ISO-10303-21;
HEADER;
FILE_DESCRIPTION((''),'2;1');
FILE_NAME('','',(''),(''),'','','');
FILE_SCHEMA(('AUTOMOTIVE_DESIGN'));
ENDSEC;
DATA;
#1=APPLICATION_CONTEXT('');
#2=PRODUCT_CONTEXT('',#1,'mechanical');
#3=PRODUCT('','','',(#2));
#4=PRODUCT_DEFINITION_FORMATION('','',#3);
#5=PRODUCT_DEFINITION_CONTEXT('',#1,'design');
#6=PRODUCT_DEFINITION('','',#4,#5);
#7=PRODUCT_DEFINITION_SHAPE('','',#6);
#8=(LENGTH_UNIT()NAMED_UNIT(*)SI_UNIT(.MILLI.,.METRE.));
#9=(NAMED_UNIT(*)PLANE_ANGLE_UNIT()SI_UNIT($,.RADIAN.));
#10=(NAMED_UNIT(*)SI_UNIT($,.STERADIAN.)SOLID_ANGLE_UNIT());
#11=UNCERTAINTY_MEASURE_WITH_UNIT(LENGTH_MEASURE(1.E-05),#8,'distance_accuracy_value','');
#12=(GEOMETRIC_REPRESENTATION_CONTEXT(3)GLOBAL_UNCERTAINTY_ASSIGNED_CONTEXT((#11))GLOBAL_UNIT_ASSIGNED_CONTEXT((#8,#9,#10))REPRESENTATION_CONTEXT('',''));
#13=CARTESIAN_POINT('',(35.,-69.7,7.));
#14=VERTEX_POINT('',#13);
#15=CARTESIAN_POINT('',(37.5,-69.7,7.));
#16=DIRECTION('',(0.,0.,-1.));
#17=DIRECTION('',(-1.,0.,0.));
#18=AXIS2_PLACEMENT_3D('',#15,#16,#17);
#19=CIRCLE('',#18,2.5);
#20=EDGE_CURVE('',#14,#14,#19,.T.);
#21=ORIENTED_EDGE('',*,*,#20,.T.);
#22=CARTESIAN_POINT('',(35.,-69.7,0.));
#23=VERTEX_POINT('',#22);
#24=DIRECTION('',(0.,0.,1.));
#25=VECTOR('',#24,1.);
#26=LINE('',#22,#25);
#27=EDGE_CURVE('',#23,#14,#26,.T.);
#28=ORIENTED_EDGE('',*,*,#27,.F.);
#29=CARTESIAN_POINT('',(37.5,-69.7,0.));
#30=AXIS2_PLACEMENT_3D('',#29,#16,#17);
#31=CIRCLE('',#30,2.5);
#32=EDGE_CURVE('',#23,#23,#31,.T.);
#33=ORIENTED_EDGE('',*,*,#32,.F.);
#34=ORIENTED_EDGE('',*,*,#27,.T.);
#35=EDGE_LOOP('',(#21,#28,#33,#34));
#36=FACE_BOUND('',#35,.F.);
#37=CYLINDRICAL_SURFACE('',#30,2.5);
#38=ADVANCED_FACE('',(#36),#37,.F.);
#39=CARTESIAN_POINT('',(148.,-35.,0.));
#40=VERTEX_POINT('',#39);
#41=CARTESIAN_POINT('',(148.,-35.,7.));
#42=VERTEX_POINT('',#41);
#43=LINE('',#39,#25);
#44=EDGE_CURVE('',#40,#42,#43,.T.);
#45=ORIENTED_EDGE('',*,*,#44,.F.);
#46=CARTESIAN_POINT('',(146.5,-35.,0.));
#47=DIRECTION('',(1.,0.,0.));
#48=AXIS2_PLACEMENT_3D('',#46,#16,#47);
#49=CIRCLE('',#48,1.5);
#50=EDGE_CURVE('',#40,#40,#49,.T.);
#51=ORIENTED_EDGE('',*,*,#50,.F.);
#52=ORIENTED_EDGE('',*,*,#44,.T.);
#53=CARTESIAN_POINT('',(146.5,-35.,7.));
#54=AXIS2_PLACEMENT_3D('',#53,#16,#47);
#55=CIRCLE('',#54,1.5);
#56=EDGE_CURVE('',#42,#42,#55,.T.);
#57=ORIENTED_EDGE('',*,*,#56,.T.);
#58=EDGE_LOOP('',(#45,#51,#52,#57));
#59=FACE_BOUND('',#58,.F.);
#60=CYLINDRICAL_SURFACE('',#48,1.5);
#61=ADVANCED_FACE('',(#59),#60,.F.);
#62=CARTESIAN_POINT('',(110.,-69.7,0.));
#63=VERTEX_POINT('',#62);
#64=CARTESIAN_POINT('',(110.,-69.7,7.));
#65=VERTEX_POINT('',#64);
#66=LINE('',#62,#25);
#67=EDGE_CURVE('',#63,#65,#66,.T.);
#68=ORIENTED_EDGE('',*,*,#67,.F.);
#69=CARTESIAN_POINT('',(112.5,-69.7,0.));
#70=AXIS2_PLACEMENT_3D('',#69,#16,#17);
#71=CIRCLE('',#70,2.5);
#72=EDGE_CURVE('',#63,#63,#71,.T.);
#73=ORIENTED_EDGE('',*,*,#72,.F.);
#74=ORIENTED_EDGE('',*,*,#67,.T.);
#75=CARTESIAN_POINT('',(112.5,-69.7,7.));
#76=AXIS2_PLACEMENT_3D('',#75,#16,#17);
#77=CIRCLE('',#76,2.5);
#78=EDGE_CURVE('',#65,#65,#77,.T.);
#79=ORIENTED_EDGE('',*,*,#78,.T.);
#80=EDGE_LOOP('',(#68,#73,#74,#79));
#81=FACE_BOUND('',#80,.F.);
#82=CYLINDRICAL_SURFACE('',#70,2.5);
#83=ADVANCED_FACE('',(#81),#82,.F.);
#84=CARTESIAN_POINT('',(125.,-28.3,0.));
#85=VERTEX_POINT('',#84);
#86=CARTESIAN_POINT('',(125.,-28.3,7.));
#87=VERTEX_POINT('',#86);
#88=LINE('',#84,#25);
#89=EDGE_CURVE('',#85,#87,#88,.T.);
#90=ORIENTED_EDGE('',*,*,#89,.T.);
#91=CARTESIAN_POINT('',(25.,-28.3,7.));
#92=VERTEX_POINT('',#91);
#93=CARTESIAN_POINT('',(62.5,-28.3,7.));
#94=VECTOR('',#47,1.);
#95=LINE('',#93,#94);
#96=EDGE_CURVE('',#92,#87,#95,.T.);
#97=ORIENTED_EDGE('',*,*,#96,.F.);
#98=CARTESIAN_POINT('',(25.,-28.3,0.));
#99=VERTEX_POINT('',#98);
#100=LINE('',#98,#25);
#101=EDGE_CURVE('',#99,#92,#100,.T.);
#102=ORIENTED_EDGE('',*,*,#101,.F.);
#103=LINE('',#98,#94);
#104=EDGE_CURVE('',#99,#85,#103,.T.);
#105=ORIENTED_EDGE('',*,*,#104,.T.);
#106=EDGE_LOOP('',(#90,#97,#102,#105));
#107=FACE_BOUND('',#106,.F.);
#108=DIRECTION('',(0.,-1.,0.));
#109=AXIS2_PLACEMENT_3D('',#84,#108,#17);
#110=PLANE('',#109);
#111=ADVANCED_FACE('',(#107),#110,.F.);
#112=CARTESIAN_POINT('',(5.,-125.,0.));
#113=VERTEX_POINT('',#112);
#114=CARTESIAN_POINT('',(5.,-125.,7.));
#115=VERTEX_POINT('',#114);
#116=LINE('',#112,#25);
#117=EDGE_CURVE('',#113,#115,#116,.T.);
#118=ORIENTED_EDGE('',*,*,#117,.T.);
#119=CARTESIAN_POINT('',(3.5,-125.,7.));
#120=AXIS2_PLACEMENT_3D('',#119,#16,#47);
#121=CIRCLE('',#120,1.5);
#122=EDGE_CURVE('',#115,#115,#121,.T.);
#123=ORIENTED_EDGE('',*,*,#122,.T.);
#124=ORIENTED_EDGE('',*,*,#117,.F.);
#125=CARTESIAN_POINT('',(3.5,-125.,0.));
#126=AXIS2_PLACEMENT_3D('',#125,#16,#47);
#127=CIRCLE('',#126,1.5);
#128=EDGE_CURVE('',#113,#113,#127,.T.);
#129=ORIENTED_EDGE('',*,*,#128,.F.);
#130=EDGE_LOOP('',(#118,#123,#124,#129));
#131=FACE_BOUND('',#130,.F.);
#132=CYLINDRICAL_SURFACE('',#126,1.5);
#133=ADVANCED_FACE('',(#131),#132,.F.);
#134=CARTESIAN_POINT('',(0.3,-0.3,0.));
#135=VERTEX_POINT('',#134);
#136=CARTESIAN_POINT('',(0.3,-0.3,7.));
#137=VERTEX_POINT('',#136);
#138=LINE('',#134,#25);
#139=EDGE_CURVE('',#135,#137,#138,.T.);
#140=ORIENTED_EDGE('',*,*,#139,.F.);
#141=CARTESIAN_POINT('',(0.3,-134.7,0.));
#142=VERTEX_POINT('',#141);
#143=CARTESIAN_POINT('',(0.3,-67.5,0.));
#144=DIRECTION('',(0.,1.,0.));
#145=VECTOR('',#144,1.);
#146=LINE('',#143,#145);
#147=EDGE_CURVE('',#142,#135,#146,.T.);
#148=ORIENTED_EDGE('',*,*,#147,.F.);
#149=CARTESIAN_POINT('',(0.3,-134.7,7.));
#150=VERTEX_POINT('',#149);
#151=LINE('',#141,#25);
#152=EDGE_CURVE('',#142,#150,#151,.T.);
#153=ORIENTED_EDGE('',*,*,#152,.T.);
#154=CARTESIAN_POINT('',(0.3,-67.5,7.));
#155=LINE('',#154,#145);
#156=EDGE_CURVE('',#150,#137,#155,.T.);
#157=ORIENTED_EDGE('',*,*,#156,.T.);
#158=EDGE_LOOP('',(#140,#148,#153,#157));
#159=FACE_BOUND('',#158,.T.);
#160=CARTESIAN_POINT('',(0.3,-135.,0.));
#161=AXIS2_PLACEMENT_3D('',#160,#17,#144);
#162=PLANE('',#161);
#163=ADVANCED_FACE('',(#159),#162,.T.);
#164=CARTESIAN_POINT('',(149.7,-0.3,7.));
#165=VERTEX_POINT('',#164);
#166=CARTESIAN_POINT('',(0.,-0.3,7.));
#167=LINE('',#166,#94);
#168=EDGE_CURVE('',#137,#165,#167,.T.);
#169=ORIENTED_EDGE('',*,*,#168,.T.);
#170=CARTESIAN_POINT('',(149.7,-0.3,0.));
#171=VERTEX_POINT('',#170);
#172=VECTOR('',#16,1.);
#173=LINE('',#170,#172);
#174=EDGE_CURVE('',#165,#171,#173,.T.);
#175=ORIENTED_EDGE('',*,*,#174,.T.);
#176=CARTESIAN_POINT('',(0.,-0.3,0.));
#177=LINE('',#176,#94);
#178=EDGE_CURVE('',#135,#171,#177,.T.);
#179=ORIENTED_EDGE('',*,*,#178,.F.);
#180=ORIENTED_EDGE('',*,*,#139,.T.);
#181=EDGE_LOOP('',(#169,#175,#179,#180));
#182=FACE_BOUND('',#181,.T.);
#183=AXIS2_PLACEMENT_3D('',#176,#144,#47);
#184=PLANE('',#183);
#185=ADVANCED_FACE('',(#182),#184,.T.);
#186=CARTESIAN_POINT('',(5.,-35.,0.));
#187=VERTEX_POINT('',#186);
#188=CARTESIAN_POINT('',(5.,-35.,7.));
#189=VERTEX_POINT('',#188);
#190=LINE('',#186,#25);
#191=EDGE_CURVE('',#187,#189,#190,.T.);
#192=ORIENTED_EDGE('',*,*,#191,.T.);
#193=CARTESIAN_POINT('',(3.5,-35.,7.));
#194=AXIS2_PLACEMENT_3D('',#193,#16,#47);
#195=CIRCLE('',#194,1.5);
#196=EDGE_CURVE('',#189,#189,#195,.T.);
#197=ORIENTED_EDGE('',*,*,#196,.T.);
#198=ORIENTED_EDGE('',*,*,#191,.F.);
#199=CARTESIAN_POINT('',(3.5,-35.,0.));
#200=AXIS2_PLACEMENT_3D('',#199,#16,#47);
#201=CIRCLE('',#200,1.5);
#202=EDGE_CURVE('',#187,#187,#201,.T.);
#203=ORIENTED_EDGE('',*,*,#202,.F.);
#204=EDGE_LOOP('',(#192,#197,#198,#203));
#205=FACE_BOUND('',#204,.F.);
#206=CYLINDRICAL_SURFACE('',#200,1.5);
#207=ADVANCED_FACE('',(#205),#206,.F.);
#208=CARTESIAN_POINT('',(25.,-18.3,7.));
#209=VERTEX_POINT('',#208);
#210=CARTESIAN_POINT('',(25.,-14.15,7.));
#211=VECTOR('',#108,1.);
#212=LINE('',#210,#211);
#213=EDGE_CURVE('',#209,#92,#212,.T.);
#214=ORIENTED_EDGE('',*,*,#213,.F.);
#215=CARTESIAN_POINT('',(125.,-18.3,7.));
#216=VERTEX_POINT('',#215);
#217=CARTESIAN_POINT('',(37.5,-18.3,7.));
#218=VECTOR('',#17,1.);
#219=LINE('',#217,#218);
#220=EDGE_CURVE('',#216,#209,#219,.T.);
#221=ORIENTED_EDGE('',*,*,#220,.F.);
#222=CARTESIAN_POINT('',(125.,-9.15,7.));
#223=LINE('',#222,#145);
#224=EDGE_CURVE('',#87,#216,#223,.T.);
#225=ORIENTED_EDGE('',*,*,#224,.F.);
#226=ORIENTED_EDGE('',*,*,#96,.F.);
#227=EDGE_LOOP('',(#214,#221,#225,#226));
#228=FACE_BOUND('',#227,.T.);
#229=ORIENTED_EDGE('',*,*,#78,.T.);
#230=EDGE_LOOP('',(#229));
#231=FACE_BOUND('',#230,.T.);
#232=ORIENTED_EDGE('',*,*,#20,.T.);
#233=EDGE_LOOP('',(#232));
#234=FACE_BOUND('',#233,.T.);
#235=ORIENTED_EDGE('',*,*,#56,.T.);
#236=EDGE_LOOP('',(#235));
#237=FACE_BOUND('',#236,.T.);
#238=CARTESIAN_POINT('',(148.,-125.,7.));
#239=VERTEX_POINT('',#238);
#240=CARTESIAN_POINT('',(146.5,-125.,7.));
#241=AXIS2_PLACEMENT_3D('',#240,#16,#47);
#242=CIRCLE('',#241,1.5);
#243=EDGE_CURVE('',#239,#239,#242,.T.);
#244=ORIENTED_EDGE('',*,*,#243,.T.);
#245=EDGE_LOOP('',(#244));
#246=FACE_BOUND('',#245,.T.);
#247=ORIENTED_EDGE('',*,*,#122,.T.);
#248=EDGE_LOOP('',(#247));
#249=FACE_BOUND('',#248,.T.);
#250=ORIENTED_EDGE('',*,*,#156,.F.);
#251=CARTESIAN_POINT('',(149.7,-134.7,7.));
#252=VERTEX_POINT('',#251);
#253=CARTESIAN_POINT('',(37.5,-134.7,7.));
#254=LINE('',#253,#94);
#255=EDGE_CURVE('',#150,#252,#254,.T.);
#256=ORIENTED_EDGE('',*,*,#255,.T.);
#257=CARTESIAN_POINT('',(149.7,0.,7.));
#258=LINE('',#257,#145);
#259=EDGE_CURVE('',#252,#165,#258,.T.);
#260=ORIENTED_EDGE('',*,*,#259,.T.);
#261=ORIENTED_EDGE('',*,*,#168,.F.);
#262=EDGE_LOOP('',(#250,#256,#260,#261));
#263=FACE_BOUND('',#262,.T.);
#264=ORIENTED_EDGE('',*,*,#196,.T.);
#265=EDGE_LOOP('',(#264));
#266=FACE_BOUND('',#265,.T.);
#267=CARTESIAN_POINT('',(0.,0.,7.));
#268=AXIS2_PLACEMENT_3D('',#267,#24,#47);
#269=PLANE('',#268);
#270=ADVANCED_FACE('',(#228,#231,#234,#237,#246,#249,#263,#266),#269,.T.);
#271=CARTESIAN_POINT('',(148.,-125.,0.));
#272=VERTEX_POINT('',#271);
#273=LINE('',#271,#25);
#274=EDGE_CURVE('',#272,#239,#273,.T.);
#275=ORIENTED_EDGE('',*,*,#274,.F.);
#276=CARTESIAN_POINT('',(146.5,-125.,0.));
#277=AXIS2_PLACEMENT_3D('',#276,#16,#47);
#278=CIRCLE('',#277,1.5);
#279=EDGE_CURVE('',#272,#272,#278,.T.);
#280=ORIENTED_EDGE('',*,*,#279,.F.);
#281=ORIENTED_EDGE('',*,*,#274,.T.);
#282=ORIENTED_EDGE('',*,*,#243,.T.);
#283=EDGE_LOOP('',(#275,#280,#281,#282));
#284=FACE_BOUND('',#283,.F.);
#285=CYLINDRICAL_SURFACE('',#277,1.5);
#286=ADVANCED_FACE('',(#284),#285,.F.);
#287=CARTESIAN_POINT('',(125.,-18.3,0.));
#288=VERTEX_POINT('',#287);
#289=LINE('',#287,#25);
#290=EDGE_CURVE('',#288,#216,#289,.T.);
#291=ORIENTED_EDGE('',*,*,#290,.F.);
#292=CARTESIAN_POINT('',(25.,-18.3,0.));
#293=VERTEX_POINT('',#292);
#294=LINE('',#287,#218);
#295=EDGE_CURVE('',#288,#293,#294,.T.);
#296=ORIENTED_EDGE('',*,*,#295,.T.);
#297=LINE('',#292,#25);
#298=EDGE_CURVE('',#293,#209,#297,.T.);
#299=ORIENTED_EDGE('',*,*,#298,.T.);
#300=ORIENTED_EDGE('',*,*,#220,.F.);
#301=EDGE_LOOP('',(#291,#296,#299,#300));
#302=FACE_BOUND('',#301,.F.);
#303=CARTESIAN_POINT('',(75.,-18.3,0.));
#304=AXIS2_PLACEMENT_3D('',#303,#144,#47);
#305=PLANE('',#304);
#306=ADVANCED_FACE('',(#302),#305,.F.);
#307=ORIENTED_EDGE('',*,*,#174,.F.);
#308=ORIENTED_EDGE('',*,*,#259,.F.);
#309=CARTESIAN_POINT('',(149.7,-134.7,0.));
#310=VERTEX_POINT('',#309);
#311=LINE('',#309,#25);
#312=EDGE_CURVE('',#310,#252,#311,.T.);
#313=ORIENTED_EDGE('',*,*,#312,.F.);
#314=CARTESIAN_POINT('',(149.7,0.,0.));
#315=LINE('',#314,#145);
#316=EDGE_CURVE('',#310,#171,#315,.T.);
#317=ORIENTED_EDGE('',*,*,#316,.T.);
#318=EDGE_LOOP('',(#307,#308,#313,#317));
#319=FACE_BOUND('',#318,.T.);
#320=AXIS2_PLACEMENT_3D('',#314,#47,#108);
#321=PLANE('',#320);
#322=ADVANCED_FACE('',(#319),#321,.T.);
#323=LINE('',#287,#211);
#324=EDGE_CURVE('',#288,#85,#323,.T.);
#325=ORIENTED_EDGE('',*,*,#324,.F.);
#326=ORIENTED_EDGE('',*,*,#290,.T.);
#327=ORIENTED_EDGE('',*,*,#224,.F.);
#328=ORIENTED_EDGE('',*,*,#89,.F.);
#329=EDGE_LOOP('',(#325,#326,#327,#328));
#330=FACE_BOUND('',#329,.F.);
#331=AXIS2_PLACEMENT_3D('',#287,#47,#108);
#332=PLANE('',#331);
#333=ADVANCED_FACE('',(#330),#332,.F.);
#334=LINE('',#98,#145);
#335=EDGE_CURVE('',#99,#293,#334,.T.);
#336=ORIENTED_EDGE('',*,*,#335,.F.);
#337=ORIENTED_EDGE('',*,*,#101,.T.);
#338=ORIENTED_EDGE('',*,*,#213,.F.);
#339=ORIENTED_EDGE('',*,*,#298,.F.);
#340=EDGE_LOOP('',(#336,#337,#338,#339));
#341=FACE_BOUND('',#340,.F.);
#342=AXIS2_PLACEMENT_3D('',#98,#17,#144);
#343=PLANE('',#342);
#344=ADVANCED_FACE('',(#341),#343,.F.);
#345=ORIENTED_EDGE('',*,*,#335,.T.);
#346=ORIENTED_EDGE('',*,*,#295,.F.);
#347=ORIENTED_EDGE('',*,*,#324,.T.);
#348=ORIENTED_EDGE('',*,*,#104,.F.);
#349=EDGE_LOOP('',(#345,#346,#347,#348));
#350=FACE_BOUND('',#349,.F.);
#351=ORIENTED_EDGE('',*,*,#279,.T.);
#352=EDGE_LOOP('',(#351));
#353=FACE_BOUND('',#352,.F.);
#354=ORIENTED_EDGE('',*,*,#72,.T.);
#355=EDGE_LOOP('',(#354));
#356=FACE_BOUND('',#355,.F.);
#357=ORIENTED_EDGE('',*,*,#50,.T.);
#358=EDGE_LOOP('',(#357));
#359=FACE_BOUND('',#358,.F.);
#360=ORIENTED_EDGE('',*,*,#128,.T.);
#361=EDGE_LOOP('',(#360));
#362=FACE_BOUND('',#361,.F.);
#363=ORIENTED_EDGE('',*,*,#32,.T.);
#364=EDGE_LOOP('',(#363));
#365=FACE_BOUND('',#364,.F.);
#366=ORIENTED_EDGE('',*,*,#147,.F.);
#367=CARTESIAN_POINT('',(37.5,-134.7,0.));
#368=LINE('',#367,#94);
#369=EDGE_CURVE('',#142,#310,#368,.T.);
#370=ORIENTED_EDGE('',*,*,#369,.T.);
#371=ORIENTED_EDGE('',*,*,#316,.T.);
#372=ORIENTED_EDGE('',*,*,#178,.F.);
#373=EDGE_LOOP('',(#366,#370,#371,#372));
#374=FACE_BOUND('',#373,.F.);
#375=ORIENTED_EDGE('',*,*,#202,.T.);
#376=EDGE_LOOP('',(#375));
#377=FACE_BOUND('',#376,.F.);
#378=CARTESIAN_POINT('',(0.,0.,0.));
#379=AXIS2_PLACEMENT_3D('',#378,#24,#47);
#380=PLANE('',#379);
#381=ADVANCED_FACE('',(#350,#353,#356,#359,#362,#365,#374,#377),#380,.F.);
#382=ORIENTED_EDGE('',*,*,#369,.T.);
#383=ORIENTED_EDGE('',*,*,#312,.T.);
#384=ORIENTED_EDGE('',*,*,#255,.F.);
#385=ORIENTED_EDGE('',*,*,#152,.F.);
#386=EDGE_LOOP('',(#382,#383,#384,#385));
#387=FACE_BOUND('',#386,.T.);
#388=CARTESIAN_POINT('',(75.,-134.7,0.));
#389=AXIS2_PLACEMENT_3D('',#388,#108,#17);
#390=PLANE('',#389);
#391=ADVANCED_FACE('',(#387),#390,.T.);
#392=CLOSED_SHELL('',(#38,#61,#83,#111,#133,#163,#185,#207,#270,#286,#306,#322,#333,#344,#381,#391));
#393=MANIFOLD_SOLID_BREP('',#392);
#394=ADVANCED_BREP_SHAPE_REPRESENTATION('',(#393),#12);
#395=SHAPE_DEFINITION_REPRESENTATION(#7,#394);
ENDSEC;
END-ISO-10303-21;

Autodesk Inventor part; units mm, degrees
ref_plane "YZ Plane" through (0, 0, 0) normal (1, 0, 0) x (0, 1, 0)
ref_plane "XZ Plane" through (0, 0, 0) normal (0, 1, 0) x (-1, 0, 0)
ref_plane "XY Plane" through (0, 0, 0) normal (0, 0, 1) x (1, 0, 0)
sketch "Sketch1" plane through (0, 0, 0) normal (0, 0, 1) x (1, 0, 0)
  line L0 (0, 0) -> (150, 0)
  line L1 (150, 0) -> (150, -135)
  line L2 (150, -135) -> (0, -135)
  line L3 (0, -135) -> (0, 0)
  circle A0 centre (3.5, -35) radius 1.5
  line L4 (75, 0) -> (75, -135)
  circle A1 centre (146.5, -35) radius 1.5
  circle A2 centre (3.5, -125) radius 1.5
  circle A3 centre (146.5, -125) radius 1.5
  dimension "d0" = 150
  dimension "d1" = 135
  dimension "d2" = 3
  dimension "d3" = 3.5
  dimension "d4" = 35
  dimension "d5" = 3
  dimension "d6" = 3.5
  dimension "d7" = 90
extrude "Extrusion1" add sketch "Sketch1" along normal blind 7
move faces "Move1" translate (0, -0.3, 0) faces at (100, 0, 2.3333)
move faces "Move2" translate (-0.3, 0, 0) faces at (150, -90.1, 2.3333)
move faces "Move3" translate (0, 0.3, 0) faces at (49.9, -135, 2.3333)
move faces "Move4" translate (0.3, 0, 0) faces at (0, -45.1, 2.3333)
sketch "Sketch3" plane through (0, 0, 0) normal (0, 0, -1) x (-1, 0, 0)
  line L0 (-149.7, -134.7) -> (-149.7, -0.3) construction
  line L1 (-149.7, -23.3) -> (-0.3, -23.3) construction
  line L2 (-0.3, -0.3) -> (-0.3, -134.7) construction
  line L3 (-149.7, -0.3) -> (-0.3, -0.3) construction
  line L4 (-125, -28.3) -> (-25, -28.3)
  line L5 (-25, -28.3) -> (-25, -18.3)
  line L6 (-25, -18.3) -> (-125, -18.3)
  line L7 (-125, -18.3) -> (-125, -28.3)
  line L8 (-125, -28.3) -> (-25, -18.3) construction
  line L9 (-25, -28.3) -> (-125, -18.3) construction
  line L10 (-149.7, -0.3) -> (-0.3, -0.3) projected
  line L11 (-75, -0.3) -> (-75, -132.391)
  circle A0 centre (-112.5, -69.7) radius 2.5
  line L12 (-0.3, -134.7) -> (-149.7, -134.7) projected
  circle A1 centre (-37.5, -69.7) radius 2.5
  point P0 (0, 0)
  point P1 (-75, -23.3)
  dimension "d22" = 23
  dimension "d23" = 100
  dimension "d24" = 10
  dimension "d27" = 5
  dimension "d28" = 75
  dimension "d29" = 65
extrude "Extrusion2" cut sketch "Sketch3" against normal through all
sketch "Sketch5" plane through (0, 0, 7) normal (0, 0, 1) x (1, 0, 0)
  point P0 (0, 0)
sketch "Sketch6" plane through (0.3, -134.7, 0) normal (-1, 0, 0) x (0, 0, 1)
  point P0 (0, 134.7)
properties part number "mávač_víčko"
